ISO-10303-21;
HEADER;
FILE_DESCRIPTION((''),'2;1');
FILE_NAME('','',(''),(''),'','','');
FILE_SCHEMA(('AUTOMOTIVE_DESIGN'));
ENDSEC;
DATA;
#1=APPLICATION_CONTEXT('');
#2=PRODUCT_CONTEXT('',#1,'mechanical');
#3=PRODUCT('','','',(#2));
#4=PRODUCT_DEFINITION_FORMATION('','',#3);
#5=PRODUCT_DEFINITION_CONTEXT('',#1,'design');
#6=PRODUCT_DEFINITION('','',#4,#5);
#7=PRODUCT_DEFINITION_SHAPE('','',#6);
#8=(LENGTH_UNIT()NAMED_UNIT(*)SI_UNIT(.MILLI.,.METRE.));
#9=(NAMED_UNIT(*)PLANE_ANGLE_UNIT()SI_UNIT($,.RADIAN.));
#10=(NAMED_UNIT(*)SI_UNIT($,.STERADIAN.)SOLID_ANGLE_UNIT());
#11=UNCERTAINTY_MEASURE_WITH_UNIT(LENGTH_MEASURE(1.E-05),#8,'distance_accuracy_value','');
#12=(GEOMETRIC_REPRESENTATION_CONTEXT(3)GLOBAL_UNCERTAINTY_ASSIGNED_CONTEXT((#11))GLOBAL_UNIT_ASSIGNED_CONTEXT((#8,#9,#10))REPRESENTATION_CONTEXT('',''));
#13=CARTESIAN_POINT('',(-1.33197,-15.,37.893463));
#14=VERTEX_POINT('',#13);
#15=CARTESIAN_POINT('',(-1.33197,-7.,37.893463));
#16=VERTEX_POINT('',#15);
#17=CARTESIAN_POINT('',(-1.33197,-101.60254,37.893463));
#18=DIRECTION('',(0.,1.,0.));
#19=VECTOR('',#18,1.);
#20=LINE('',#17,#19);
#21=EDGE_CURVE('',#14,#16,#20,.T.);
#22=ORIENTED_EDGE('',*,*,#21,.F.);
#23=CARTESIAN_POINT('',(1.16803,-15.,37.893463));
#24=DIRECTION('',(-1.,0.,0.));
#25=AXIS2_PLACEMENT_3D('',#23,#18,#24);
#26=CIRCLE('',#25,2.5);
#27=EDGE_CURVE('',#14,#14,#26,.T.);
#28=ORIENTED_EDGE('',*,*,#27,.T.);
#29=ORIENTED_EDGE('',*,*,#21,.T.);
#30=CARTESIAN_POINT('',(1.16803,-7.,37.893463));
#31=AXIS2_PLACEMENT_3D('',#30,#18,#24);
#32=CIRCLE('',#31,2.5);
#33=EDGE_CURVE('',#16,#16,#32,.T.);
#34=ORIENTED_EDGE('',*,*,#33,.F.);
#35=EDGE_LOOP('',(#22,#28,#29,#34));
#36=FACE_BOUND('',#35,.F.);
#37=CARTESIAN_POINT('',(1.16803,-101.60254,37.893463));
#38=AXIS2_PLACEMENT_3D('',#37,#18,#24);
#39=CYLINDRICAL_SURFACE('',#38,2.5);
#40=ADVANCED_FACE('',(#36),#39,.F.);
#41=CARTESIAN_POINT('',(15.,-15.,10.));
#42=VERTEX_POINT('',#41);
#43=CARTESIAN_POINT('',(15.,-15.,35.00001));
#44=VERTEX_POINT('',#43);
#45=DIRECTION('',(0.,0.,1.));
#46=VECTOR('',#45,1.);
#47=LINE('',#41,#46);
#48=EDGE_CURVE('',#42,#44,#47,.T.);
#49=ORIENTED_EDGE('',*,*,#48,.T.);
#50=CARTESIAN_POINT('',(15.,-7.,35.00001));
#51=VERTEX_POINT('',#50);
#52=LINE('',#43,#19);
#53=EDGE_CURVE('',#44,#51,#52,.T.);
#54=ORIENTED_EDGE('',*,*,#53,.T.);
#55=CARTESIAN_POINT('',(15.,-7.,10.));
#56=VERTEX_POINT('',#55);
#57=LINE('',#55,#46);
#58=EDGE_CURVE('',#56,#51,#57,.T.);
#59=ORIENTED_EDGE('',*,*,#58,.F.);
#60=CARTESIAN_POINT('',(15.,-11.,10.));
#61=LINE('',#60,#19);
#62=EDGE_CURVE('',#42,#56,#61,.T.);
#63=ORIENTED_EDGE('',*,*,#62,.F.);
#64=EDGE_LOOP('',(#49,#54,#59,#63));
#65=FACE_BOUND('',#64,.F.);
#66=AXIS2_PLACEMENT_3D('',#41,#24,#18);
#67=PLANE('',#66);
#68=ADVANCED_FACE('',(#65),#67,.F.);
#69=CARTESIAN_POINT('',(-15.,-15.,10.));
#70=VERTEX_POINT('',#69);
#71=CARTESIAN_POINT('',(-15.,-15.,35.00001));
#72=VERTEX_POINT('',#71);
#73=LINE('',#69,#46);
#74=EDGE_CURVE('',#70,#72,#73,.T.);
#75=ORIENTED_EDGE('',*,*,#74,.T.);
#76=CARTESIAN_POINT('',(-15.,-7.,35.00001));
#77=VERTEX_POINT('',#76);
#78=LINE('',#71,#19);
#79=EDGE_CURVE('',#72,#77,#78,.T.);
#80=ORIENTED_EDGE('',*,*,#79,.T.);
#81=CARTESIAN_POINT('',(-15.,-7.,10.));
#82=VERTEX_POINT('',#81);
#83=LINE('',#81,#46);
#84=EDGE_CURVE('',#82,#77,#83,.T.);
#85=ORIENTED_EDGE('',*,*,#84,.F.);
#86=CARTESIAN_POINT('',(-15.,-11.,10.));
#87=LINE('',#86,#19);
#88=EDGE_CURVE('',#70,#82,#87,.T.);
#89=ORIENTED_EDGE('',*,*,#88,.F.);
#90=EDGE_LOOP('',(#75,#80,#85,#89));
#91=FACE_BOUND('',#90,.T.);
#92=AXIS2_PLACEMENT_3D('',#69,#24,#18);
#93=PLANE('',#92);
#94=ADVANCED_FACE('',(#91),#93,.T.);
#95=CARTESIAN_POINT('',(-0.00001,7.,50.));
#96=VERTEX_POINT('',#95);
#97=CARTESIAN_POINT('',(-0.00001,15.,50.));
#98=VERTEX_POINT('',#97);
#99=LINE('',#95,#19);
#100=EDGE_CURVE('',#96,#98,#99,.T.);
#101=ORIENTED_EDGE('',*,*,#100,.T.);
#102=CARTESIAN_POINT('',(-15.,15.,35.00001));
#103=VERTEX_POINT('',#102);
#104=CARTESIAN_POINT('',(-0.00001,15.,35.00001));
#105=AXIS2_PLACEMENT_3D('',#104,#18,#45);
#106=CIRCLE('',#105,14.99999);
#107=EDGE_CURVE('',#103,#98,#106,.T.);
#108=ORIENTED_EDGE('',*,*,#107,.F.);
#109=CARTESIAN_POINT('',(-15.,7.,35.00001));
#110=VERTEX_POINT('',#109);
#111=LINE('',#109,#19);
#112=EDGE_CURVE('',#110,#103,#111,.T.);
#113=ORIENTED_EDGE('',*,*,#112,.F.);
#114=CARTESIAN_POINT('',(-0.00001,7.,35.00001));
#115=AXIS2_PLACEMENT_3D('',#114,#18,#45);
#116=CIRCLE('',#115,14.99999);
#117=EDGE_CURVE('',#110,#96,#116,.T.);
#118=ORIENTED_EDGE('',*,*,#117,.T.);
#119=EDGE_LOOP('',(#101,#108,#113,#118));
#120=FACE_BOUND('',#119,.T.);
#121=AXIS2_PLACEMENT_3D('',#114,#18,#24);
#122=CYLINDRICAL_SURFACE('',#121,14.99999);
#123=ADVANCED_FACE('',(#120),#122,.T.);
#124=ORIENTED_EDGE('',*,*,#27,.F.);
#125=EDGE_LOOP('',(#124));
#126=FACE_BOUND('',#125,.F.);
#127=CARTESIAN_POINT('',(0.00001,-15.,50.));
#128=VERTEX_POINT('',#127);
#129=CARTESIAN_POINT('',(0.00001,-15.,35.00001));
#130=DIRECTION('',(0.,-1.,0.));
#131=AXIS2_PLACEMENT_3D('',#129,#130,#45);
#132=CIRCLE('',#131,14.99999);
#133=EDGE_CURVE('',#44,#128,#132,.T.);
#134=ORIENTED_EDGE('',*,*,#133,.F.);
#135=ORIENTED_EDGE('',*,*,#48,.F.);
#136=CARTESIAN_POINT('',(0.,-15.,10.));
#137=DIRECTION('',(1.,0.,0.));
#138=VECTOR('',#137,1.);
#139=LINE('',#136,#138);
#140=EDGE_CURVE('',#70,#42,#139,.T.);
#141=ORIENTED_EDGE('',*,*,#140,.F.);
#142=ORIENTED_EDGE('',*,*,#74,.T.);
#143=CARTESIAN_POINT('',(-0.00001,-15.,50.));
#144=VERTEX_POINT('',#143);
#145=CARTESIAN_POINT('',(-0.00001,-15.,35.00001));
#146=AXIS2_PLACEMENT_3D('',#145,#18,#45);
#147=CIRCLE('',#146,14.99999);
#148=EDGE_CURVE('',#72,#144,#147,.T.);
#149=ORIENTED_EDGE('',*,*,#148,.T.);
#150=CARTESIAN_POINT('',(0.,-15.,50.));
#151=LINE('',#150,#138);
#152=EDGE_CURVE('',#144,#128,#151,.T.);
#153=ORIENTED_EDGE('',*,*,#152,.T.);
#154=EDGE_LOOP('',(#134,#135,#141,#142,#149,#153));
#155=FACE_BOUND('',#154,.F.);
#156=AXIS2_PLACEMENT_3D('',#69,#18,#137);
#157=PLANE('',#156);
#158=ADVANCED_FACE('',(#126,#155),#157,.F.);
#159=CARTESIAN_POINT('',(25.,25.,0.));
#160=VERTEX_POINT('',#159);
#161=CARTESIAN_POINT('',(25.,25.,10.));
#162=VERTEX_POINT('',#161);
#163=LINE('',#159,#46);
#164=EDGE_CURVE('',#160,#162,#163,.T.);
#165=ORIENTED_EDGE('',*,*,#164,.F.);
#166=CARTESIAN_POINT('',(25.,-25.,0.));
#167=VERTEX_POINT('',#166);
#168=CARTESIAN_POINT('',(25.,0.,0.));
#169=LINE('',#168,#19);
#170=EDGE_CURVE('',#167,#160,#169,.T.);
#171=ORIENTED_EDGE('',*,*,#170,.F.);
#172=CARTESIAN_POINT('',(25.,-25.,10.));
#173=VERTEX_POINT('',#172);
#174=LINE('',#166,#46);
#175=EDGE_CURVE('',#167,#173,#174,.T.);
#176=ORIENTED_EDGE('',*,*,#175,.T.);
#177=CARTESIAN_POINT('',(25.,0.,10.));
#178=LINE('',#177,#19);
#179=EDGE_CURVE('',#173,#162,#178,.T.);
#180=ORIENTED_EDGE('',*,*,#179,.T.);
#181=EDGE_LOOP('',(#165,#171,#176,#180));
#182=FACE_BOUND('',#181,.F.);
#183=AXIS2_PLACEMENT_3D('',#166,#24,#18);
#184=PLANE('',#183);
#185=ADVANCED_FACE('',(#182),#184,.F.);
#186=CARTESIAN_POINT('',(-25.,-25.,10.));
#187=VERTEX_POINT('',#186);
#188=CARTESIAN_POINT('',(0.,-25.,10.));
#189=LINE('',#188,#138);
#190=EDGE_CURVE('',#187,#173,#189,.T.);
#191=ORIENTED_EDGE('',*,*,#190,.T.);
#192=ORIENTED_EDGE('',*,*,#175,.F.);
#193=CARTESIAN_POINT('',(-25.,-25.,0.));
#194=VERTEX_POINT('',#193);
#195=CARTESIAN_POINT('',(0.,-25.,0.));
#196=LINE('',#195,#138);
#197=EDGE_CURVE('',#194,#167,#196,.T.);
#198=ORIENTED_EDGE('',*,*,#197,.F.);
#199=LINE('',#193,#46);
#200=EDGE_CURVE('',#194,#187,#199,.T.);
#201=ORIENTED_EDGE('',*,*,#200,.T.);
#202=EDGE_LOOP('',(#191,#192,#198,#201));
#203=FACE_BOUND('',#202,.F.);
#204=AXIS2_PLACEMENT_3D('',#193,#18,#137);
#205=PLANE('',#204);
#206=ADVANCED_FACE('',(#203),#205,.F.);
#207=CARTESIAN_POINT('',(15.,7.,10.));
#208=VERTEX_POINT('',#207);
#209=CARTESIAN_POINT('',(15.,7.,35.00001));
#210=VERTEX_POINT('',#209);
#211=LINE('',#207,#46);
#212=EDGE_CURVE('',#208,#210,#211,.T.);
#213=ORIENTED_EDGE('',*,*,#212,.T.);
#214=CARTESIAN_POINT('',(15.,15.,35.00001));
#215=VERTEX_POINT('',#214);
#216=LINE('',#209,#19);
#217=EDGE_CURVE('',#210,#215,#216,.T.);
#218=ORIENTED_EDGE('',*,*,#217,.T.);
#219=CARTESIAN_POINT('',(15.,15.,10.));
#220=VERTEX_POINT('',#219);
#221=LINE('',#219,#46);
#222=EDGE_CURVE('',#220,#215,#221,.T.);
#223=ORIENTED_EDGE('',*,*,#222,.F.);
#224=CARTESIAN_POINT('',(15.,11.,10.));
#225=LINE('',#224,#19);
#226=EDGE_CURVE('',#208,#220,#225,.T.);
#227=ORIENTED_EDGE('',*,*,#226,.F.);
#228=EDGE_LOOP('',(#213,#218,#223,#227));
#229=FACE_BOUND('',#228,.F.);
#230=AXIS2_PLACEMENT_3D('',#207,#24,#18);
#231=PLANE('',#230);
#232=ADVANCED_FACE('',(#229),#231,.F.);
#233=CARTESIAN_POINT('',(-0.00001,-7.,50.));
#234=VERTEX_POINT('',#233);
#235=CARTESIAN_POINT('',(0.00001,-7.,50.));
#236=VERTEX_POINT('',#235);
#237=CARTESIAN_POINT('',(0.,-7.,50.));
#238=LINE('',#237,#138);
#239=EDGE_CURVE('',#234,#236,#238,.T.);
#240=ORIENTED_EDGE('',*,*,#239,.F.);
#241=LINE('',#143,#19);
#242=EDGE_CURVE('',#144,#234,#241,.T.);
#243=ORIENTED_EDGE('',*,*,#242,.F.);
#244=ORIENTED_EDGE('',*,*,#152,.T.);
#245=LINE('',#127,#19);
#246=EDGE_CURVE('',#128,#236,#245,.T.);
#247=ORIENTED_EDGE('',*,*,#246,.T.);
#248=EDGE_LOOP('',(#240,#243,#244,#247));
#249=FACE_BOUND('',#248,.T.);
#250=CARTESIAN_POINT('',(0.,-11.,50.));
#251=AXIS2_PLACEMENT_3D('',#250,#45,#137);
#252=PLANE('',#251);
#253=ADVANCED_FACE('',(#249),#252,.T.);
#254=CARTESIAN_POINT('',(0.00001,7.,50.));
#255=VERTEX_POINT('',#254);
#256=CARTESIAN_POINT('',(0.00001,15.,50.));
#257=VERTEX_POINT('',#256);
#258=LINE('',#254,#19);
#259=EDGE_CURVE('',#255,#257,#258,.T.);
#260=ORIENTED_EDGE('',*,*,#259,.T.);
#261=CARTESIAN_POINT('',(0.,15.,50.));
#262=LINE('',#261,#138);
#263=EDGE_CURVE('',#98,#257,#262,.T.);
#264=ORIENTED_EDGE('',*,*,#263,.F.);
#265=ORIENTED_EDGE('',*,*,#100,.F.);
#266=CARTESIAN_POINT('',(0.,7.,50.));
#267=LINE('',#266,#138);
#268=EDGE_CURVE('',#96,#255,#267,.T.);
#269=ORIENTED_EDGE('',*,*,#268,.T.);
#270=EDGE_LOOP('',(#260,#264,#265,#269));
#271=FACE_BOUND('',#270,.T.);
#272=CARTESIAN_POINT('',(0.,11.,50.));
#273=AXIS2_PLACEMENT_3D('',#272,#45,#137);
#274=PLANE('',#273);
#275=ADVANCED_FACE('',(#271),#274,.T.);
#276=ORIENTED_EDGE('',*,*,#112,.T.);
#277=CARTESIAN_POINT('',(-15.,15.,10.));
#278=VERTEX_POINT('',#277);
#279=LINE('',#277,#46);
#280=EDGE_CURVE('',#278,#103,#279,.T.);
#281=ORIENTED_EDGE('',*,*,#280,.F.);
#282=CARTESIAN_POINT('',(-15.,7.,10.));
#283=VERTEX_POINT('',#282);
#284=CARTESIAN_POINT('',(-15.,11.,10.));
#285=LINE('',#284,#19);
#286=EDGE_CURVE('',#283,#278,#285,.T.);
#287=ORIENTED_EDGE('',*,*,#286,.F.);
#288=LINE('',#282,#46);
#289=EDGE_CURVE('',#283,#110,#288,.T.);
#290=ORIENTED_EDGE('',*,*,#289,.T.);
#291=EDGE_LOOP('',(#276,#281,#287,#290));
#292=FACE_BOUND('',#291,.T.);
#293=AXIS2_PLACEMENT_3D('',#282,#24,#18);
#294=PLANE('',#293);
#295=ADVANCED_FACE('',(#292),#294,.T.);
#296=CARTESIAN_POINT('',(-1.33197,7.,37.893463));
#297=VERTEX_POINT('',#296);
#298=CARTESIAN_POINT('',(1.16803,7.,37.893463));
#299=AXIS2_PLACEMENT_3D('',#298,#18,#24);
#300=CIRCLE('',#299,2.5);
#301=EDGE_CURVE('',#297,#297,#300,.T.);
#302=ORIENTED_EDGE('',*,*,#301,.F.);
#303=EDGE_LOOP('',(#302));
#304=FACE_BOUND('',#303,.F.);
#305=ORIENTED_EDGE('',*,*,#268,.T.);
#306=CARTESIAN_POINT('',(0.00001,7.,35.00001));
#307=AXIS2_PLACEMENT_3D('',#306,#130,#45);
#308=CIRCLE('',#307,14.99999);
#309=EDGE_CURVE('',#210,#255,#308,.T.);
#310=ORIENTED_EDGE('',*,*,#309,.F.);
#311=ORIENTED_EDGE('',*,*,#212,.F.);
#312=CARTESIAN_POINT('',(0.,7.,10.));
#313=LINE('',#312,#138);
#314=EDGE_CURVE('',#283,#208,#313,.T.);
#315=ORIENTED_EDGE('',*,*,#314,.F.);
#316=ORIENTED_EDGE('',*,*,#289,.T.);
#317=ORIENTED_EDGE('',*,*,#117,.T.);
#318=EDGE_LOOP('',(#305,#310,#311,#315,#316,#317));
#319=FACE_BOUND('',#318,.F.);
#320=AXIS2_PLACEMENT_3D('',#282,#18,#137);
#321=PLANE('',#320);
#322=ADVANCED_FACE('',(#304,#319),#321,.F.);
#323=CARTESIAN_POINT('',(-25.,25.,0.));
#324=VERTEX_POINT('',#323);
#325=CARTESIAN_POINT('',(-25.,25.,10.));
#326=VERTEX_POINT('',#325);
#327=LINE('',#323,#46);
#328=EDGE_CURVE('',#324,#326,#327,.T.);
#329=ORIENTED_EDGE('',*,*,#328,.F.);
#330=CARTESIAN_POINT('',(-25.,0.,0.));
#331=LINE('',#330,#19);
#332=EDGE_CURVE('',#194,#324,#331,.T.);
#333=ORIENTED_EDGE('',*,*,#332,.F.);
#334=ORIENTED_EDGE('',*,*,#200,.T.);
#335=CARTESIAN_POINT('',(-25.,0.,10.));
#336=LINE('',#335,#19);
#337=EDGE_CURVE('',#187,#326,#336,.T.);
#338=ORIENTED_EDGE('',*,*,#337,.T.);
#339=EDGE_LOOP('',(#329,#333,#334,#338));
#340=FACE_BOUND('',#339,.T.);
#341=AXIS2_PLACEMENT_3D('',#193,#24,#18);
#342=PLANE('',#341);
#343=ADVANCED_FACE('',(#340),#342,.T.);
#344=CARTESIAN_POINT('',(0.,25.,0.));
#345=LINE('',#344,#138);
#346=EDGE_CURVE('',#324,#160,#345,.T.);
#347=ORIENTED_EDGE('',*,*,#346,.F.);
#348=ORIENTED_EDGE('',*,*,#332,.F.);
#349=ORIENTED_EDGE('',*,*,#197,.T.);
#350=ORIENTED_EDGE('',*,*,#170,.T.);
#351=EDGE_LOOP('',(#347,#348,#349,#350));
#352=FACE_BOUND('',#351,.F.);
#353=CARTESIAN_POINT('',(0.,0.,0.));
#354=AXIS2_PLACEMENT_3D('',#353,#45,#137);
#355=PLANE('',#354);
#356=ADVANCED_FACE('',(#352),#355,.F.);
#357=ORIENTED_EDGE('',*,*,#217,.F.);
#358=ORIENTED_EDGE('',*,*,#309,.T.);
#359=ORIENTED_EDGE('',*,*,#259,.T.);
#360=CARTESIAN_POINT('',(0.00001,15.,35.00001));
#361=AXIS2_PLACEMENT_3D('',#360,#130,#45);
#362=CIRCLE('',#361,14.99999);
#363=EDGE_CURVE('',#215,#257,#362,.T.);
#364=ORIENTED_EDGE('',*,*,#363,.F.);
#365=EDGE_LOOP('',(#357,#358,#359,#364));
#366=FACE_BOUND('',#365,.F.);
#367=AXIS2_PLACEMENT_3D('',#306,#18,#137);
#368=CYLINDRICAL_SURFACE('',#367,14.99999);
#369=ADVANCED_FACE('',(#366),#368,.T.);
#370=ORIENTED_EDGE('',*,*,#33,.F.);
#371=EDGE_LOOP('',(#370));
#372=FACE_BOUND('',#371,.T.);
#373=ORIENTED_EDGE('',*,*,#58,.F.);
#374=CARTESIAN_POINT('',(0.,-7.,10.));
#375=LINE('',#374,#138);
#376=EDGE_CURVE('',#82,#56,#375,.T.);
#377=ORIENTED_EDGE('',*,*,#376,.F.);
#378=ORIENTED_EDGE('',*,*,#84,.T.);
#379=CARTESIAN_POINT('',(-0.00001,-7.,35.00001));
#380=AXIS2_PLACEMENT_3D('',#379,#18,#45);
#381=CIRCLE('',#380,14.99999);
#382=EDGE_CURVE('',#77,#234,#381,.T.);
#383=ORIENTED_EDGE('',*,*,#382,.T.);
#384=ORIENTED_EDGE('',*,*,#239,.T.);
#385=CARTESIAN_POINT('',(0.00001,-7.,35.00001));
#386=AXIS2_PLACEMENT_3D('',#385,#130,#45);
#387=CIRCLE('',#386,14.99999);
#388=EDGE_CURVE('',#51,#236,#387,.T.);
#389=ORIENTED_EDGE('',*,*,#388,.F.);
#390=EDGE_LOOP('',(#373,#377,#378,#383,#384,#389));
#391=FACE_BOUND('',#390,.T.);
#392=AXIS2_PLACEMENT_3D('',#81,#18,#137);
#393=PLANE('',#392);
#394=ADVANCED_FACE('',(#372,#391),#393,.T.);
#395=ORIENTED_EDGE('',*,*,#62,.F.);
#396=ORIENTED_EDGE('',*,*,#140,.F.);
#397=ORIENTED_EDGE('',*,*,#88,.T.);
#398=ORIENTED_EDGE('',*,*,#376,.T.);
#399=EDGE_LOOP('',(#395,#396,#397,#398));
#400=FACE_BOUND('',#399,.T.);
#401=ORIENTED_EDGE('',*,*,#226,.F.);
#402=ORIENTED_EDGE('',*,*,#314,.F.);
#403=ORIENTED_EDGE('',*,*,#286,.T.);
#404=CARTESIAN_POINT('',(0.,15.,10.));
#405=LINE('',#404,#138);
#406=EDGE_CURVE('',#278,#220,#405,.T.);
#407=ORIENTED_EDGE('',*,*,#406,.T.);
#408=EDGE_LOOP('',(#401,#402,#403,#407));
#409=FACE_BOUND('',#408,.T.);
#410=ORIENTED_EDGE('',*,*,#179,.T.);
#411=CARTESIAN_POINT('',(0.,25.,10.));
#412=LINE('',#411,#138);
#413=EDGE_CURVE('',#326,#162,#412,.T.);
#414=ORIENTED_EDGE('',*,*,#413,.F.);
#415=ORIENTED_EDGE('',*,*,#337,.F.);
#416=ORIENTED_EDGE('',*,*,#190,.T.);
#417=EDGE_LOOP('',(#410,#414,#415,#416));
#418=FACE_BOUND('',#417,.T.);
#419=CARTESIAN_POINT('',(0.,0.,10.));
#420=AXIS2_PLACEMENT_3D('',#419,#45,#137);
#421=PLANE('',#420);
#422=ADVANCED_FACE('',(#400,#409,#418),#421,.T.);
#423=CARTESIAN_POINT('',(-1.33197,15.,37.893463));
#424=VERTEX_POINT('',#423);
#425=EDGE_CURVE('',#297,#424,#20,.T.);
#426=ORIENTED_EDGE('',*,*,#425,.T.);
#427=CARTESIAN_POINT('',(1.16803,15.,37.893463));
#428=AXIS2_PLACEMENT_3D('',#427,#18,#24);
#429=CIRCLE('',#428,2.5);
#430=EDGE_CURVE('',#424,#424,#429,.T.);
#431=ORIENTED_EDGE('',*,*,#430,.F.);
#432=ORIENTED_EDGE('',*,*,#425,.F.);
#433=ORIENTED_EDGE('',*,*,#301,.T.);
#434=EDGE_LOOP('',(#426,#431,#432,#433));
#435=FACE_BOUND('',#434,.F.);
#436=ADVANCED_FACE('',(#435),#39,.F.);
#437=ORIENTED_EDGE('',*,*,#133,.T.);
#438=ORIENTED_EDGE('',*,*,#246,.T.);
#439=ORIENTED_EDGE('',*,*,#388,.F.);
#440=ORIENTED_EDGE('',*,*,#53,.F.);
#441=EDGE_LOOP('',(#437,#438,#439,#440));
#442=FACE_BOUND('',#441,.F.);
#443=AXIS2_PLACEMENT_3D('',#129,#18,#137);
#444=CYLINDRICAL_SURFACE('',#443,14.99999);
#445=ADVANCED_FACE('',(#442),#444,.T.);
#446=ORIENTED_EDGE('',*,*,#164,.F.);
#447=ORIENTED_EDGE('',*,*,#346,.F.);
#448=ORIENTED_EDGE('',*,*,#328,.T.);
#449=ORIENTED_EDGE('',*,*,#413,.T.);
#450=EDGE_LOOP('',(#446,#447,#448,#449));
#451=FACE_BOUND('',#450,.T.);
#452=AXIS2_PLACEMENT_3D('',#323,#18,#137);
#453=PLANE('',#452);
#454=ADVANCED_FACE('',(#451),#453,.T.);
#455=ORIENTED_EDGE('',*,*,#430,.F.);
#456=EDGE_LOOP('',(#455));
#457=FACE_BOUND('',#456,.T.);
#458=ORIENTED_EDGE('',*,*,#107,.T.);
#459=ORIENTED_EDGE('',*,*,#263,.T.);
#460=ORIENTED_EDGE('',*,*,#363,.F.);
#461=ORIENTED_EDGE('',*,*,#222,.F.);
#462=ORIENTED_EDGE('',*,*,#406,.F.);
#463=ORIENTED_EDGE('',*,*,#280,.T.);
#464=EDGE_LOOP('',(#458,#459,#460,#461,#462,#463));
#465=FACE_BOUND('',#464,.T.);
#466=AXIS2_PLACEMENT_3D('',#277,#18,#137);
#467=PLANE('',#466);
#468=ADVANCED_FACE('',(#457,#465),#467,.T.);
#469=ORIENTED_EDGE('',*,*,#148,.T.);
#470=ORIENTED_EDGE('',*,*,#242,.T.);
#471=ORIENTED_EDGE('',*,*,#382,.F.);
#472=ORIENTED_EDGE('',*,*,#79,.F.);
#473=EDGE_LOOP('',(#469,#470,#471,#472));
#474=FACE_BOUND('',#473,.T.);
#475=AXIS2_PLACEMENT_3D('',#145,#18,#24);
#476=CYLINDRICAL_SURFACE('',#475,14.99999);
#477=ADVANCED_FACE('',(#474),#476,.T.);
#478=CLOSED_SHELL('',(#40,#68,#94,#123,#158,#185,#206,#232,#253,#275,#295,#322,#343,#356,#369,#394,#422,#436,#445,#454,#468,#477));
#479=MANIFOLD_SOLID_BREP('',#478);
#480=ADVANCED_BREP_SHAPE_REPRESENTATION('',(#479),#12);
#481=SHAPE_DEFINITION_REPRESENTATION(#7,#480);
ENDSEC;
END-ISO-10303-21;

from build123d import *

# Parameters (mm, degrees)
F0_W     = 50
F0_H     = 50
F1_DEPTH = 10
F2_W     = 30
F2_H     = 8
F3_DEPTH = 40
F4_W     = 30
F4_H     = 8
F5_DEPTH = 40
F6_R     = 14.99999
F7_R     = 14.99999
F9_D     = 5


# Not quite as in the source:
# - a fillet or chamfer is up to 0.001 mm smaller than in the source, because OpenCascade refuses the exact size


with BuildPart() as f1:
    # F0 (on Top) → F1 (new body)
    with BuildSketch(Plane.XY):
        Rectangle(F0_W, F0_H)
    extrude(amount=F1_DEPTH)

    # F2 (on face) → F3 (join)
    with BuildSketch(Plane.XY.offset(10)):
        with Locations((0, -11)):
            Rectangle(F2_W, F2_H)
    extrude(amount=F3_DEPTH)

    # F4 (on face) → F5 (join)
    with BuildSketch(Plane.XY.offset(10)):
        with Locations((0, 11)):
            Rectangle(F4_W, F4_H)
    extrude(amount=F5_DEPTH)

    # F6 (radius 15 in the source; OpenCascade refuses exactly that, so slightly less here)
    f6_edges = [f1.edges().sort_by_distance(p)[0] for p in [
        (-15, -11, 50),
        (15, -11, 50),
    ]]
    fillet(f6_edges, radius=F6_R)

    # F7 (radius 15 in the source; OpenCascade refuses exactly that, so slightly less here)
    f7_edges = [f1.edges().sort_by_distance(p)[0] for p in [
        (15, 11, 50),
        (-15, 11, 50),
    ]]
    fillet(f7_edges, radius=F7_R)

    # F9 (through all)
    with Locations(Plane.XZ.offset(15)):
        with Locations((1.1680303141, 37.8934629261)):
            Hole(F9_D / 2)


solid = f1.part
